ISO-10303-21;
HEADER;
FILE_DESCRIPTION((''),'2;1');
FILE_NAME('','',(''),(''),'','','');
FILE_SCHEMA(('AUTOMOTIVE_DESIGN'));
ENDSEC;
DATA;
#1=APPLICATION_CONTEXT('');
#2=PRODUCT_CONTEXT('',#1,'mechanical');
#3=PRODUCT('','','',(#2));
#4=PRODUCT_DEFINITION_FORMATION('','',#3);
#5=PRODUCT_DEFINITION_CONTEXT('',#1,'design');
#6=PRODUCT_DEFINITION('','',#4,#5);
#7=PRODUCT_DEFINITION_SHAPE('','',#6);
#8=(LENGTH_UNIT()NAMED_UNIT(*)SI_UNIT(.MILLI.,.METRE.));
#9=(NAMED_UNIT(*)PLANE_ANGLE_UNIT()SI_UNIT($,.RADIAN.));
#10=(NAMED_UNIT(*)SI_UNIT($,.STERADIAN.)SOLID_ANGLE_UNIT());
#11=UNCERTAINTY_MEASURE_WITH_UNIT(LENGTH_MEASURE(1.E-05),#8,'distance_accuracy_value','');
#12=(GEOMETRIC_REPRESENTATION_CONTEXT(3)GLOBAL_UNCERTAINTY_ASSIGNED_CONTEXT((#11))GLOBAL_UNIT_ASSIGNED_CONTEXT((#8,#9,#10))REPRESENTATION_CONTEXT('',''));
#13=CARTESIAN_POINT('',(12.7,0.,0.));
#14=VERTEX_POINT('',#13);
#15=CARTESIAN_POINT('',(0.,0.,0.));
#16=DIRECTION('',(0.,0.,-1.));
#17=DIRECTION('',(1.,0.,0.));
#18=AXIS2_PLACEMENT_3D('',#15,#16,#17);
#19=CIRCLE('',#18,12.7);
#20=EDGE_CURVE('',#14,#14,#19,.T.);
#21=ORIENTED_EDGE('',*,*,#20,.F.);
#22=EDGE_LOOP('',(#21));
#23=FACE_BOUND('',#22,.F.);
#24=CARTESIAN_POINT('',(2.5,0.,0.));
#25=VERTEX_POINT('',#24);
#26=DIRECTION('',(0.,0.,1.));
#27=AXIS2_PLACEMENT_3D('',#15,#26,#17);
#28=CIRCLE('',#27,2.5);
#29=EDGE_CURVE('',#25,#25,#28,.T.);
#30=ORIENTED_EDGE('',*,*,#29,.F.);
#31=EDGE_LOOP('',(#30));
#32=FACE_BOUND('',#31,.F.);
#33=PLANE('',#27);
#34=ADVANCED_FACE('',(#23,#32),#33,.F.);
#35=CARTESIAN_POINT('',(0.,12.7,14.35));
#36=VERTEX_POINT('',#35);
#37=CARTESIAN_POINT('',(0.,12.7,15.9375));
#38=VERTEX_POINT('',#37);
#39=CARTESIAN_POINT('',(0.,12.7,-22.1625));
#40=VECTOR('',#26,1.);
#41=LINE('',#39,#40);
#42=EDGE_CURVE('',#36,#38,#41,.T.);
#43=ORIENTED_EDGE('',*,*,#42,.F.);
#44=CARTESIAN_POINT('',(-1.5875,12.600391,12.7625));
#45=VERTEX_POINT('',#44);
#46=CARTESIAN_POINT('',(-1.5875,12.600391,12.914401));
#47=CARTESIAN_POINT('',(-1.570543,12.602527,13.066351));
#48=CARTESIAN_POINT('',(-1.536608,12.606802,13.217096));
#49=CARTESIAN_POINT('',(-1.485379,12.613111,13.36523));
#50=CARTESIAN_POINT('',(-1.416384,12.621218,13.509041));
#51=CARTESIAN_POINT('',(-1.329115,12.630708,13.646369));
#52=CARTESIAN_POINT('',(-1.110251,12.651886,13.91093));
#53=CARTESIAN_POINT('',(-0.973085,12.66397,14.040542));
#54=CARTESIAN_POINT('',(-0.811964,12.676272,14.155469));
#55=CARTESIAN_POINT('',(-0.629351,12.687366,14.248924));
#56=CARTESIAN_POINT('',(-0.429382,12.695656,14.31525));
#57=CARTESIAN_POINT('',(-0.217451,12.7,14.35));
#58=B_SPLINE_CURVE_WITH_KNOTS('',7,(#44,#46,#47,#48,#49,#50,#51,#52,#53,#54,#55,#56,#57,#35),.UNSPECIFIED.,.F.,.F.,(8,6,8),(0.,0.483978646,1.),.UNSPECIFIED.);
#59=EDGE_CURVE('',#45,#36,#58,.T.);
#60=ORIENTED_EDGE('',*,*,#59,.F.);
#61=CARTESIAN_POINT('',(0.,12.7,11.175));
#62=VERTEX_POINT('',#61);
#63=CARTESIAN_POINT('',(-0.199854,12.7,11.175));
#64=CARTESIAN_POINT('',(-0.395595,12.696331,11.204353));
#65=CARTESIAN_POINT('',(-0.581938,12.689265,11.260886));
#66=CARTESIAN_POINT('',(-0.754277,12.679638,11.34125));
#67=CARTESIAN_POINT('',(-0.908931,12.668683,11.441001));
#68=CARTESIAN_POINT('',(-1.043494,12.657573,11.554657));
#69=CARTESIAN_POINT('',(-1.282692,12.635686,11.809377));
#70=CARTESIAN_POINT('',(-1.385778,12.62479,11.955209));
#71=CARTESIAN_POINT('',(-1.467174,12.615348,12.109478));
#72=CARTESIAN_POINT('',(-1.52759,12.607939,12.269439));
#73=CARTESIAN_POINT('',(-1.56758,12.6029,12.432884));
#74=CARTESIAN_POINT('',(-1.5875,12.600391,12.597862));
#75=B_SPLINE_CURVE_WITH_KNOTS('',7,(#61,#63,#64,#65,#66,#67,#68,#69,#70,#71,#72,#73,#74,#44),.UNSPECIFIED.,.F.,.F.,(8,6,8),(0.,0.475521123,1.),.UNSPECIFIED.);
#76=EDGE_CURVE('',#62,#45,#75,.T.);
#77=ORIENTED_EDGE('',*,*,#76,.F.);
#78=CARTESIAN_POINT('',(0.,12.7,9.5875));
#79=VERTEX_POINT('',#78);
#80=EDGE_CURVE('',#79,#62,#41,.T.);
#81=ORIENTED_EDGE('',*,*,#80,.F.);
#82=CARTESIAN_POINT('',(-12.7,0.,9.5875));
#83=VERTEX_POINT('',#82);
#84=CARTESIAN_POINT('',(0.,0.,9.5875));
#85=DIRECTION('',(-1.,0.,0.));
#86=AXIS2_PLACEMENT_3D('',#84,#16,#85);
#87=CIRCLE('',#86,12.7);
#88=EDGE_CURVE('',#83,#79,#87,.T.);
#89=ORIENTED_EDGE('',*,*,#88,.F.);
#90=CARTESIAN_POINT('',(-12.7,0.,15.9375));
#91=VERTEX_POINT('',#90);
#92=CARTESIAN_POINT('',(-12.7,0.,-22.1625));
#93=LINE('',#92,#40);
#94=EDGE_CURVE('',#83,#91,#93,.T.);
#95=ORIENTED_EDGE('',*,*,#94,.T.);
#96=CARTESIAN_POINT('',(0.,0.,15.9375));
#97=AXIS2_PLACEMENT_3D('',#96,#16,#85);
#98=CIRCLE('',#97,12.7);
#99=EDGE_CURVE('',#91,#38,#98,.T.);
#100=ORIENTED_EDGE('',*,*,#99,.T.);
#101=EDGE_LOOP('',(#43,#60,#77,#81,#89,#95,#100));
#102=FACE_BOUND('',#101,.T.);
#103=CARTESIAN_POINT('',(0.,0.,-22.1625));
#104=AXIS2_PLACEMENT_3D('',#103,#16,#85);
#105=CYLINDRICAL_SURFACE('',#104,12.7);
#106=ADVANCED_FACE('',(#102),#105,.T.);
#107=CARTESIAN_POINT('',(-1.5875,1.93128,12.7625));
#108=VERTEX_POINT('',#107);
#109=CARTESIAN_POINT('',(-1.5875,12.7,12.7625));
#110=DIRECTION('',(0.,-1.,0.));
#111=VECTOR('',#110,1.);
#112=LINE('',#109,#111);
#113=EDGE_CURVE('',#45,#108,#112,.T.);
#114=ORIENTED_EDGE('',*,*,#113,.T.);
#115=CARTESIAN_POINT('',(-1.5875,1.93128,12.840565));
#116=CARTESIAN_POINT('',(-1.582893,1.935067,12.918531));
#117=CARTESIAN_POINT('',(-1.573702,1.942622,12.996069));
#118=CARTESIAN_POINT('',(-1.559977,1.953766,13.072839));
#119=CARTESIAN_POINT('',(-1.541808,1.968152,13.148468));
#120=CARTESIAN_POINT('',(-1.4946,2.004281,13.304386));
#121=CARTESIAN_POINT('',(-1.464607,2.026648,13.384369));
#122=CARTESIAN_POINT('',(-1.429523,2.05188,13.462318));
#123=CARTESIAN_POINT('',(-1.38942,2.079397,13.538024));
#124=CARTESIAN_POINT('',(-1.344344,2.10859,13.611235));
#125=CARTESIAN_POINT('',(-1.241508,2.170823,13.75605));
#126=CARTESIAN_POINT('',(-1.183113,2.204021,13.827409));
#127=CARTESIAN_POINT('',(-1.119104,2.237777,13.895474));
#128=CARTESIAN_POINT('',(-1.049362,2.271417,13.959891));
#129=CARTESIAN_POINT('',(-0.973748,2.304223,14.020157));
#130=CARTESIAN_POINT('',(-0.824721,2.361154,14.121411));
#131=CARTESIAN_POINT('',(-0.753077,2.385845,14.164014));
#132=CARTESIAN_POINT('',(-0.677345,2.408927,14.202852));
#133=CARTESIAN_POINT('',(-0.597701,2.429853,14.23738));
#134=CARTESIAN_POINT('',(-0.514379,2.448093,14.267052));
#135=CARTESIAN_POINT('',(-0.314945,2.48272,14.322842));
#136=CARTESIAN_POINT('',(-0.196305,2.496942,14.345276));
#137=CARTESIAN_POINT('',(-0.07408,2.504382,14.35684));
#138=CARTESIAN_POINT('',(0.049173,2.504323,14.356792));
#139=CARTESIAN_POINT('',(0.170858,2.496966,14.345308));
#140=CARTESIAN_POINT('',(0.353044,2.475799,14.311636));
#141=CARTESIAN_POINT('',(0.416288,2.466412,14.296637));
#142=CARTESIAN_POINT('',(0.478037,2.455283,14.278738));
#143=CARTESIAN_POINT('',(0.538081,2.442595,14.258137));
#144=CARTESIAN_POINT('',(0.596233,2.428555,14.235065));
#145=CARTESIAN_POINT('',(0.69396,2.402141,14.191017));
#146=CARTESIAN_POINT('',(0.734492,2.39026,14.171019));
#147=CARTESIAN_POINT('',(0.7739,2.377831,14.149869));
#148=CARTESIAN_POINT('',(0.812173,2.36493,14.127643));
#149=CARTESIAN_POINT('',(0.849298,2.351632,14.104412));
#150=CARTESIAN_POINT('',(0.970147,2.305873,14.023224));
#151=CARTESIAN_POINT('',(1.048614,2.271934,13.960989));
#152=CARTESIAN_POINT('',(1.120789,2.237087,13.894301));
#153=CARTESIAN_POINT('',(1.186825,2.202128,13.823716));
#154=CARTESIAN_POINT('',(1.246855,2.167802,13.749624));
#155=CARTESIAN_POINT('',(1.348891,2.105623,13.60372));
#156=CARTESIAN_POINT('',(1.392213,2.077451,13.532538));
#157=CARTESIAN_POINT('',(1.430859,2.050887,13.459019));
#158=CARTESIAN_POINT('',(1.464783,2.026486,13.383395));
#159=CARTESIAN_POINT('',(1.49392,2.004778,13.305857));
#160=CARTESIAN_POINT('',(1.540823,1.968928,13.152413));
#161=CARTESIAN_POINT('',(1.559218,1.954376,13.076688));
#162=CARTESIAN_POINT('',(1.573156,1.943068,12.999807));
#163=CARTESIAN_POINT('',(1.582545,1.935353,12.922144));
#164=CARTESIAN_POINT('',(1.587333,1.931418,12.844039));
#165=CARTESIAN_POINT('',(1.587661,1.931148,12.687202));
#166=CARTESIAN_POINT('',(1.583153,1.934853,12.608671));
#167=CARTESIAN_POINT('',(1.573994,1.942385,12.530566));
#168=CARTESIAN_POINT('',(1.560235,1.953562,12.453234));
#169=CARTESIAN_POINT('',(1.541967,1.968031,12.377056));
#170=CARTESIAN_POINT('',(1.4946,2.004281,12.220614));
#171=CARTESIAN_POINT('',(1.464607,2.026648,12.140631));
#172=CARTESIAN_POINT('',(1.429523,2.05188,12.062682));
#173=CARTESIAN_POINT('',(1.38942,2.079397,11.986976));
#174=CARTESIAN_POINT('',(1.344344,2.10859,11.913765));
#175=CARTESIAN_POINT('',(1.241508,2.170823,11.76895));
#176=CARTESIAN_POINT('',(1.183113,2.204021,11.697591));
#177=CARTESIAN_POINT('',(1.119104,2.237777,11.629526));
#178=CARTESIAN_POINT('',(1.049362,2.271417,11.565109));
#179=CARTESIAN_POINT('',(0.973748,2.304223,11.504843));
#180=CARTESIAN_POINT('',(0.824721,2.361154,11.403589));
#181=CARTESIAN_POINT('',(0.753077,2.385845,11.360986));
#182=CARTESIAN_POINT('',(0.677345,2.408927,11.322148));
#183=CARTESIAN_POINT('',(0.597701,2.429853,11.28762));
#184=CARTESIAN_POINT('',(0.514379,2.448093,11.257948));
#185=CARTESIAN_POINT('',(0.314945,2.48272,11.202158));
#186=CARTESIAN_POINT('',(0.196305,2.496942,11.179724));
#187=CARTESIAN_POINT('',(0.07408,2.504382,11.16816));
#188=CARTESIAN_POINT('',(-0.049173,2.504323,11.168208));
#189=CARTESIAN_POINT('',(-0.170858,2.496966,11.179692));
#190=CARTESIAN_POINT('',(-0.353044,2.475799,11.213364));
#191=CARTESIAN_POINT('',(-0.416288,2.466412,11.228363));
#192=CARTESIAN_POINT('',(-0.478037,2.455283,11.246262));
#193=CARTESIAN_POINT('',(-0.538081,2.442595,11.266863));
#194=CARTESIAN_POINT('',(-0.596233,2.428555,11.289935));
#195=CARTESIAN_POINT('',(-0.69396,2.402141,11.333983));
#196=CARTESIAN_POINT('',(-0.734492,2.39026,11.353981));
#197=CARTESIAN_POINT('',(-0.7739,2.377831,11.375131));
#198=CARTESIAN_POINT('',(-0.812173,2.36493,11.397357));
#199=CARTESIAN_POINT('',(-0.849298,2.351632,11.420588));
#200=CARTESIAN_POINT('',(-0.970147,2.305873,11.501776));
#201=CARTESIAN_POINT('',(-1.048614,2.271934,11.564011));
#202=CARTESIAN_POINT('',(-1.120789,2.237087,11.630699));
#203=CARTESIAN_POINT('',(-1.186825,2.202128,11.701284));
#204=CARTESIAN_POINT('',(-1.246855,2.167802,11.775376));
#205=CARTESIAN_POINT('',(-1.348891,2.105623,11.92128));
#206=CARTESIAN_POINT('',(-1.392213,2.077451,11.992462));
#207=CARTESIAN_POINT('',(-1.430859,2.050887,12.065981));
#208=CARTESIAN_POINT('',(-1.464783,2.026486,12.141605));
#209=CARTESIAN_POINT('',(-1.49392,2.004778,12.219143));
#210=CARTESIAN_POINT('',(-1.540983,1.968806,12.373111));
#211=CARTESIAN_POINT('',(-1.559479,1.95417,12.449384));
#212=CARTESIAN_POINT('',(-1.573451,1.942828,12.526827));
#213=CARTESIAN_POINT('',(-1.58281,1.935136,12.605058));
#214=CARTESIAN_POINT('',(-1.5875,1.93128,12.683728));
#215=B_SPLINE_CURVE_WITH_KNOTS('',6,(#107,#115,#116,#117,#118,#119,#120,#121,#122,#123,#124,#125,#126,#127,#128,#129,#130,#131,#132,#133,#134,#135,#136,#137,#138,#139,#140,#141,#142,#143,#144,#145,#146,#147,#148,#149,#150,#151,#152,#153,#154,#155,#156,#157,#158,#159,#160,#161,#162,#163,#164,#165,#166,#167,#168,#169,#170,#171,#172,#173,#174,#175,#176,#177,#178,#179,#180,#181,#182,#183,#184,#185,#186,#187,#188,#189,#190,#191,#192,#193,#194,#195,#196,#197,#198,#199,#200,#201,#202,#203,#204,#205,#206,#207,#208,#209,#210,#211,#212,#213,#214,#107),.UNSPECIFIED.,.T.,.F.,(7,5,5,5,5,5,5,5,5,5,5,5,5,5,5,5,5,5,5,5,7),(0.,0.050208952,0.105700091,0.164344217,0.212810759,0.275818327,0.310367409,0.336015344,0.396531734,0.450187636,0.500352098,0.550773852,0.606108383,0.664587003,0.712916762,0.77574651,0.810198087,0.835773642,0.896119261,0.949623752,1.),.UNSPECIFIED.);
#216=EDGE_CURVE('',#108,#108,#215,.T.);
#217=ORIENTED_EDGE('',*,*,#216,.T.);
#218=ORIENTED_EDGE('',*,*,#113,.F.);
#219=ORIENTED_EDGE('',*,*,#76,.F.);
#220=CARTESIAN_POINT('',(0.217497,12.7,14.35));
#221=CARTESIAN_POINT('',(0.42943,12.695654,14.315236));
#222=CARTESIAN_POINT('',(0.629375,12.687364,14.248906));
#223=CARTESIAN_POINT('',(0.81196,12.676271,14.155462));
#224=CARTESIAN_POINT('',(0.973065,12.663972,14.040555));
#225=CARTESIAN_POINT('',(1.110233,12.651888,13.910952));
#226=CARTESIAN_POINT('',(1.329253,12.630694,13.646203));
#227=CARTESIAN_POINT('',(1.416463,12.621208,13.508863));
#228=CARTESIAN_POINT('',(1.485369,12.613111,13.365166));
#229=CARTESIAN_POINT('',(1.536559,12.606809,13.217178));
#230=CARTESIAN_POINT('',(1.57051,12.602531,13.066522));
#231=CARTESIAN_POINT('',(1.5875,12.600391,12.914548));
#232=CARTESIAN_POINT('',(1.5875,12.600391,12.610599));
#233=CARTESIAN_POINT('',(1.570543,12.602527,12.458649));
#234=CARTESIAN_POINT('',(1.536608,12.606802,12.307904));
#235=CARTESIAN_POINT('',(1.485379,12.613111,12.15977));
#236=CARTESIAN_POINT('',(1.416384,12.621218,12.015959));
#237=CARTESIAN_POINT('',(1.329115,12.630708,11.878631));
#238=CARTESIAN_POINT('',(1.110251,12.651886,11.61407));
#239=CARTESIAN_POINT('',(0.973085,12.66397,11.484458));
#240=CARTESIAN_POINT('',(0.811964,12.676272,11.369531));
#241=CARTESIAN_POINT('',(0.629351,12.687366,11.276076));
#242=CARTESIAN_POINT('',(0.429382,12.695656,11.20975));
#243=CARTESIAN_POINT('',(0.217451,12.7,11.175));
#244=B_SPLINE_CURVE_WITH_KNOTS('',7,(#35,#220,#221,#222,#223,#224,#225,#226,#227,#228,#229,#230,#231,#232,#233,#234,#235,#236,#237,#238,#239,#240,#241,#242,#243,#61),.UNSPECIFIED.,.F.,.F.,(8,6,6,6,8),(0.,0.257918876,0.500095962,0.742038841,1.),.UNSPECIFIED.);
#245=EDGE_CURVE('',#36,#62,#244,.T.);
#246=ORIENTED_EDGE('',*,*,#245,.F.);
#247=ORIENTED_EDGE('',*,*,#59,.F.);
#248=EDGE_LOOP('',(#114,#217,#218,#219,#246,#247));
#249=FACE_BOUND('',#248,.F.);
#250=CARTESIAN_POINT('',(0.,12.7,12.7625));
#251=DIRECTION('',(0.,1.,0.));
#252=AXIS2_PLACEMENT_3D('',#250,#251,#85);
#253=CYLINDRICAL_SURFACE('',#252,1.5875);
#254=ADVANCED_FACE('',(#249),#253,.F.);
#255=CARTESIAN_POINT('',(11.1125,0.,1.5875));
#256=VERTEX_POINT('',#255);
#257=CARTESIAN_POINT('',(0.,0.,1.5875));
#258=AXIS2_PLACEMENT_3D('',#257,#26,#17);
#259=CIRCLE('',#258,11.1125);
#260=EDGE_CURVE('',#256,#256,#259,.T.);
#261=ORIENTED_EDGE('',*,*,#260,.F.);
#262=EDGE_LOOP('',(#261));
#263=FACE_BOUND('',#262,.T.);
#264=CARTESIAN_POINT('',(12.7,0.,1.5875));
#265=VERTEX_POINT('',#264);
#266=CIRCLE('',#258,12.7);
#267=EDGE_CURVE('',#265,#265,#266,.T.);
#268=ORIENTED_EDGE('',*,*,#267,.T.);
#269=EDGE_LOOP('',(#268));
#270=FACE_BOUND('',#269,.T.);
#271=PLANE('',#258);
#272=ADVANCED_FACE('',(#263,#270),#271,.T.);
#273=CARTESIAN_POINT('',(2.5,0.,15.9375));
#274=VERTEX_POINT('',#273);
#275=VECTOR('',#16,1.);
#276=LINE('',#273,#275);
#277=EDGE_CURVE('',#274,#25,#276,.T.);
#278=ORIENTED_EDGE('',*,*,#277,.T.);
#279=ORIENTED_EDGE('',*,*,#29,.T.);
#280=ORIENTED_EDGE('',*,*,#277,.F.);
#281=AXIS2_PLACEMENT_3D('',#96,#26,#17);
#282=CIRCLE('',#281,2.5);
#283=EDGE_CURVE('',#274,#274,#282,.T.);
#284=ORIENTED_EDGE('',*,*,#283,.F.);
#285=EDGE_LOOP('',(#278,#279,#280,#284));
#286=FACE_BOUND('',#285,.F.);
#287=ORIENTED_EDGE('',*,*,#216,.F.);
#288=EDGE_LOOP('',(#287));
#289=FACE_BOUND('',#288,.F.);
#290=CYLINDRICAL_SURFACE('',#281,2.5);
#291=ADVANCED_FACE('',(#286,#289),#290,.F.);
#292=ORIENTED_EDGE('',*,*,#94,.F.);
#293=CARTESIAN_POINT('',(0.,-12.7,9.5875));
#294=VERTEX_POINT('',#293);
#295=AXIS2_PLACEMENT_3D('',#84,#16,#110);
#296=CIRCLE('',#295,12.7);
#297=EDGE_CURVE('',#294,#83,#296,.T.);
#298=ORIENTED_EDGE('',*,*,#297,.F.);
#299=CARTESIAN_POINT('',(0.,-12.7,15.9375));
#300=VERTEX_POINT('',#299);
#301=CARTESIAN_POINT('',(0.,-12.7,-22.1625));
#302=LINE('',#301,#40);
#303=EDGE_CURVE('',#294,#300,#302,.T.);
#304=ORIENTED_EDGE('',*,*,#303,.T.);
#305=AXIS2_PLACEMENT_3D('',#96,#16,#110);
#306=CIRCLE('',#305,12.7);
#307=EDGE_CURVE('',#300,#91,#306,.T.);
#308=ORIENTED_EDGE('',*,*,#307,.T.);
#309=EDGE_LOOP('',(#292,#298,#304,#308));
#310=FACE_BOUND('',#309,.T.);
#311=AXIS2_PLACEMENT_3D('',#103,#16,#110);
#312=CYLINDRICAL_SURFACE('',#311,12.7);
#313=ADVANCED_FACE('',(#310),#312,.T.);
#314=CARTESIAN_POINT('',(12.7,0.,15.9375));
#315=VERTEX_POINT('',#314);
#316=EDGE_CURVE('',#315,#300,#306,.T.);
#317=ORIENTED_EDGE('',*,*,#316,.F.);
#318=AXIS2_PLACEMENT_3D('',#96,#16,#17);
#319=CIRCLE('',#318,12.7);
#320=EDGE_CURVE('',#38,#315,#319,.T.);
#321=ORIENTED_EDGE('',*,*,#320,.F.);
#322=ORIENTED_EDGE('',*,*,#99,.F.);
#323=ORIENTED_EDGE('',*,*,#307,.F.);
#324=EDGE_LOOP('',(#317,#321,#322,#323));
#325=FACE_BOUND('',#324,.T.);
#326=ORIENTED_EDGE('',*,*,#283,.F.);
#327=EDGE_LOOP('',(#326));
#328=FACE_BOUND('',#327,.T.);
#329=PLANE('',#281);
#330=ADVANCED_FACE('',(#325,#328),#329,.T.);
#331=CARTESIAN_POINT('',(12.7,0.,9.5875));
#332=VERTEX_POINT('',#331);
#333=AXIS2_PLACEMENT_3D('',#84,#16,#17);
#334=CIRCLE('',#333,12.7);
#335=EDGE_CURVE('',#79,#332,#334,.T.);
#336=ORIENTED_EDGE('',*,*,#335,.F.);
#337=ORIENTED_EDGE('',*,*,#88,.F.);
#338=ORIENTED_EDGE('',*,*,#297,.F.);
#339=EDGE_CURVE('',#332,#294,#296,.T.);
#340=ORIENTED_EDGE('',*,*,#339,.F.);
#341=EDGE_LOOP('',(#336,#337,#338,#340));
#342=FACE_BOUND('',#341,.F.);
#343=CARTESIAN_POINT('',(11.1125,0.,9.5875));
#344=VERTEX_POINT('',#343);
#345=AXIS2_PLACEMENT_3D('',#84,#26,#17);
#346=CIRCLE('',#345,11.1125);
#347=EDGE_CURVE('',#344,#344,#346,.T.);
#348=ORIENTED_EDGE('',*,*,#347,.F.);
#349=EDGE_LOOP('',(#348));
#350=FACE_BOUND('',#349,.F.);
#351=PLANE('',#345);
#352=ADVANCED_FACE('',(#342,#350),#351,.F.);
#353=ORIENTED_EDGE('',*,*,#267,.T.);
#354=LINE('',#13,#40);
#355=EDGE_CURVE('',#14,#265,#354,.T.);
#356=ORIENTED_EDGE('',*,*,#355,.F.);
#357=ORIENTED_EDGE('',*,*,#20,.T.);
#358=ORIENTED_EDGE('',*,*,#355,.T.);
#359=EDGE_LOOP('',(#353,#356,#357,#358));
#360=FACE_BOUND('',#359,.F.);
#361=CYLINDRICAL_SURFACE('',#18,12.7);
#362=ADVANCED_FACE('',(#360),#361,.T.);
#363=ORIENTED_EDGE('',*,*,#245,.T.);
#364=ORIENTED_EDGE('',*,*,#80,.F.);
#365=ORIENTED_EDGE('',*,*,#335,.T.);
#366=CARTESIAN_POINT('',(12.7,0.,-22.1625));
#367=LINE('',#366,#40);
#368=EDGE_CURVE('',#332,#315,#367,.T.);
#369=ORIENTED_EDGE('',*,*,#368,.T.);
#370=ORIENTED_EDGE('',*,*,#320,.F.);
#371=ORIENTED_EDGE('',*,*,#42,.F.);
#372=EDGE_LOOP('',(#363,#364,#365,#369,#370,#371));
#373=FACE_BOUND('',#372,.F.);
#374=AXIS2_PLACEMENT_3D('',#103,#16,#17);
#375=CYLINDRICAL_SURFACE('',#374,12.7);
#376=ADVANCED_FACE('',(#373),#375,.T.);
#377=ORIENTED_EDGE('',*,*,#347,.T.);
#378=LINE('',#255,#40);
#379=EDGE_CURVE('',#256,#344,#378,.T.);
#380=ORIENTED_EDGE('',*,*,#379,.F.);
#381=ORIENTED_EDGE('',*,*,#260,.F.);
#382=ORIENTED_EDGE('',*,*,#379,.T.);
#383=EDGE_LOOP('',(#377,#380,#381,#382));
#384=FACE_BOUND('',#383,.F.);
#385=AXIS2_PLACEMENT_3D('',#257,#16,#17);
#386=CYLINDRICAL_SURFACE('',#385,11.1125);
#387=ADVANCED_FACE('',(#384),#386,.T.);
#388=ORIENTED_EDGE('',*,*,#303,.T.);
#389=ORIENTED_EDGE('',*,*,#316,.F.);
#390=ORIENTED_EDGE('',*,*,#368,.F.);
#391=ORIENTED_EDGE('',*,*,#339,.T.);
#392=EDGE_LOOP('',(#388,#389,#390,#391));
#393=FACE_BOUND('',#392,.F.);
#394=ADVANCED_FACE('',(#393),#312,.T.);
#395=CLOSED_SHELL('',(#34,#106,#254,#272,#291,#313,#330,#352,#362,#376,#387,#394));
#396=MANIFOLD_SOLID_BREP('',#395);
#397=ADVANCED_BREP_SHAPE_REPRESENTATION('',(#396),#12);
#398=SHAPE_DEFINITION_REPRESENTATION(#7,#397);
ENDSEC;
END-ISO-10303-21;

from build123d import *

# Parameters (mm, degrees)
F0_R         = 12.7
F1_DEPTH     = 1.5875
F2_R         = 11.1125
F3_DEPTH     = 8
F4_W         = 25.4
F4_H         = 25.4
F5_DEPTH     = 6.35
F6_R         = 2.5
F7_DEPTH     = 15.9375
F8_R         = 1.5875
F9_REACH     = 29.8911280605
F10_T1_DEPTH = 69.85


# Not quite as in the source:
# - a fillet or chamfer that OpenCascade refuses, or shapes differently, is made with other operations: its cross-section is extruded or revolved along the edge and cut away or added


with BuildPart() as f1:
    # F0 (on Top) → F1 (new body)
    with BuildSketch(Plane.XY):
        Circle(F0_R)
    extrude(amount=F1_DEPTH)

    # F2 (on face) → F3 (join)
    with BuildSketch(Plane.XY.offset(1.5875)):
        Circle(F2_R)
    extrude(amount=F3_DEPTH)

    # F4 (on face) → F5 (join)
    with BuildSketch(Plane.XY.offset(9.5875)):
        Rectangle(F4_W, F4_H)
    extrude(amount=F5_DEPTH)

    # F6 (on face) → F7 (cut, through all)
    with BuildSketch(Plane.XY.offset(15.9375)):
        Circle(F6_R)
    extrude(amount=-F7_DEPTH, mode=Mode.SUBTRACT)

    f9_end = f1.faces().sort_by_distance((-2.5, 0, 7.96875))[0]
    # F8 (on face) → F9 (cut, up to a face of the model that its end follows)
    with BuildSketch(Plane(origin=(0, 12.7, 0), x_dir=(-1, 0, 0), z_dir=(0, 1, 0))):
        with Locations((0, 12.7625)):
            Circle(F8_R)
    f9_long = extrude(amount=-F9_REACH, mode=Mode.PRIVATE)
    add(split(f9_long, bisect_by=f9_end, keep=Keep.ALL, mode=Mode.PRIVATE).solids().sort_by_distance((0, 12.7, 12.7625))[0], mode=Mode.SUBTRACT)

    # F10: fillet of radius 12.7 on 4 edges, made by hand

    # F10_s2 → F10_t1 (cut)
    with BuildSketch(Plane.XY.offset(-22.1625)):
        with BuildLine():
            ThreePointArc((-12.7, 0), (-8.9802561211, 8.9802561211), (0, 12.7))
            Line((0, 12.7), (-12.7, 12.7))
            Line((-12.7, 12.7), (-12.7, 0))
        make_face()
        with BuildLine():
            ThreePointArc((0, -12.7), (-8.9802561211, -8.9802561211), (-12.7, 0))
            Line((-12.7, 0), (-12.7, -12.7))
            Line((-12.7, -12.7), (0, -12.7))
        make_face()
        with BuildLine():
            ThreePointArc((12.7, 0), (8.9802561211, 8.9802561211), (0, 12.7))
            Line((0, 12.7), (12.7, 12.7))
            Line((12.7, 12.7), (12.7, 0))
        make_face()
        with BuildLine():
            ThreePointArc((0, -12.7), (8.9802561211, -8.9802561211), (12.7, 0))
            Line((12.7, 0), (12.7, -12.7))
            Line((12.7, -12.7), (0, -12.7))
        make_face()
    extrude(amount=F10_T1_DEPTH, mode=Mode.SUBTRACT)


solid = f1.part
